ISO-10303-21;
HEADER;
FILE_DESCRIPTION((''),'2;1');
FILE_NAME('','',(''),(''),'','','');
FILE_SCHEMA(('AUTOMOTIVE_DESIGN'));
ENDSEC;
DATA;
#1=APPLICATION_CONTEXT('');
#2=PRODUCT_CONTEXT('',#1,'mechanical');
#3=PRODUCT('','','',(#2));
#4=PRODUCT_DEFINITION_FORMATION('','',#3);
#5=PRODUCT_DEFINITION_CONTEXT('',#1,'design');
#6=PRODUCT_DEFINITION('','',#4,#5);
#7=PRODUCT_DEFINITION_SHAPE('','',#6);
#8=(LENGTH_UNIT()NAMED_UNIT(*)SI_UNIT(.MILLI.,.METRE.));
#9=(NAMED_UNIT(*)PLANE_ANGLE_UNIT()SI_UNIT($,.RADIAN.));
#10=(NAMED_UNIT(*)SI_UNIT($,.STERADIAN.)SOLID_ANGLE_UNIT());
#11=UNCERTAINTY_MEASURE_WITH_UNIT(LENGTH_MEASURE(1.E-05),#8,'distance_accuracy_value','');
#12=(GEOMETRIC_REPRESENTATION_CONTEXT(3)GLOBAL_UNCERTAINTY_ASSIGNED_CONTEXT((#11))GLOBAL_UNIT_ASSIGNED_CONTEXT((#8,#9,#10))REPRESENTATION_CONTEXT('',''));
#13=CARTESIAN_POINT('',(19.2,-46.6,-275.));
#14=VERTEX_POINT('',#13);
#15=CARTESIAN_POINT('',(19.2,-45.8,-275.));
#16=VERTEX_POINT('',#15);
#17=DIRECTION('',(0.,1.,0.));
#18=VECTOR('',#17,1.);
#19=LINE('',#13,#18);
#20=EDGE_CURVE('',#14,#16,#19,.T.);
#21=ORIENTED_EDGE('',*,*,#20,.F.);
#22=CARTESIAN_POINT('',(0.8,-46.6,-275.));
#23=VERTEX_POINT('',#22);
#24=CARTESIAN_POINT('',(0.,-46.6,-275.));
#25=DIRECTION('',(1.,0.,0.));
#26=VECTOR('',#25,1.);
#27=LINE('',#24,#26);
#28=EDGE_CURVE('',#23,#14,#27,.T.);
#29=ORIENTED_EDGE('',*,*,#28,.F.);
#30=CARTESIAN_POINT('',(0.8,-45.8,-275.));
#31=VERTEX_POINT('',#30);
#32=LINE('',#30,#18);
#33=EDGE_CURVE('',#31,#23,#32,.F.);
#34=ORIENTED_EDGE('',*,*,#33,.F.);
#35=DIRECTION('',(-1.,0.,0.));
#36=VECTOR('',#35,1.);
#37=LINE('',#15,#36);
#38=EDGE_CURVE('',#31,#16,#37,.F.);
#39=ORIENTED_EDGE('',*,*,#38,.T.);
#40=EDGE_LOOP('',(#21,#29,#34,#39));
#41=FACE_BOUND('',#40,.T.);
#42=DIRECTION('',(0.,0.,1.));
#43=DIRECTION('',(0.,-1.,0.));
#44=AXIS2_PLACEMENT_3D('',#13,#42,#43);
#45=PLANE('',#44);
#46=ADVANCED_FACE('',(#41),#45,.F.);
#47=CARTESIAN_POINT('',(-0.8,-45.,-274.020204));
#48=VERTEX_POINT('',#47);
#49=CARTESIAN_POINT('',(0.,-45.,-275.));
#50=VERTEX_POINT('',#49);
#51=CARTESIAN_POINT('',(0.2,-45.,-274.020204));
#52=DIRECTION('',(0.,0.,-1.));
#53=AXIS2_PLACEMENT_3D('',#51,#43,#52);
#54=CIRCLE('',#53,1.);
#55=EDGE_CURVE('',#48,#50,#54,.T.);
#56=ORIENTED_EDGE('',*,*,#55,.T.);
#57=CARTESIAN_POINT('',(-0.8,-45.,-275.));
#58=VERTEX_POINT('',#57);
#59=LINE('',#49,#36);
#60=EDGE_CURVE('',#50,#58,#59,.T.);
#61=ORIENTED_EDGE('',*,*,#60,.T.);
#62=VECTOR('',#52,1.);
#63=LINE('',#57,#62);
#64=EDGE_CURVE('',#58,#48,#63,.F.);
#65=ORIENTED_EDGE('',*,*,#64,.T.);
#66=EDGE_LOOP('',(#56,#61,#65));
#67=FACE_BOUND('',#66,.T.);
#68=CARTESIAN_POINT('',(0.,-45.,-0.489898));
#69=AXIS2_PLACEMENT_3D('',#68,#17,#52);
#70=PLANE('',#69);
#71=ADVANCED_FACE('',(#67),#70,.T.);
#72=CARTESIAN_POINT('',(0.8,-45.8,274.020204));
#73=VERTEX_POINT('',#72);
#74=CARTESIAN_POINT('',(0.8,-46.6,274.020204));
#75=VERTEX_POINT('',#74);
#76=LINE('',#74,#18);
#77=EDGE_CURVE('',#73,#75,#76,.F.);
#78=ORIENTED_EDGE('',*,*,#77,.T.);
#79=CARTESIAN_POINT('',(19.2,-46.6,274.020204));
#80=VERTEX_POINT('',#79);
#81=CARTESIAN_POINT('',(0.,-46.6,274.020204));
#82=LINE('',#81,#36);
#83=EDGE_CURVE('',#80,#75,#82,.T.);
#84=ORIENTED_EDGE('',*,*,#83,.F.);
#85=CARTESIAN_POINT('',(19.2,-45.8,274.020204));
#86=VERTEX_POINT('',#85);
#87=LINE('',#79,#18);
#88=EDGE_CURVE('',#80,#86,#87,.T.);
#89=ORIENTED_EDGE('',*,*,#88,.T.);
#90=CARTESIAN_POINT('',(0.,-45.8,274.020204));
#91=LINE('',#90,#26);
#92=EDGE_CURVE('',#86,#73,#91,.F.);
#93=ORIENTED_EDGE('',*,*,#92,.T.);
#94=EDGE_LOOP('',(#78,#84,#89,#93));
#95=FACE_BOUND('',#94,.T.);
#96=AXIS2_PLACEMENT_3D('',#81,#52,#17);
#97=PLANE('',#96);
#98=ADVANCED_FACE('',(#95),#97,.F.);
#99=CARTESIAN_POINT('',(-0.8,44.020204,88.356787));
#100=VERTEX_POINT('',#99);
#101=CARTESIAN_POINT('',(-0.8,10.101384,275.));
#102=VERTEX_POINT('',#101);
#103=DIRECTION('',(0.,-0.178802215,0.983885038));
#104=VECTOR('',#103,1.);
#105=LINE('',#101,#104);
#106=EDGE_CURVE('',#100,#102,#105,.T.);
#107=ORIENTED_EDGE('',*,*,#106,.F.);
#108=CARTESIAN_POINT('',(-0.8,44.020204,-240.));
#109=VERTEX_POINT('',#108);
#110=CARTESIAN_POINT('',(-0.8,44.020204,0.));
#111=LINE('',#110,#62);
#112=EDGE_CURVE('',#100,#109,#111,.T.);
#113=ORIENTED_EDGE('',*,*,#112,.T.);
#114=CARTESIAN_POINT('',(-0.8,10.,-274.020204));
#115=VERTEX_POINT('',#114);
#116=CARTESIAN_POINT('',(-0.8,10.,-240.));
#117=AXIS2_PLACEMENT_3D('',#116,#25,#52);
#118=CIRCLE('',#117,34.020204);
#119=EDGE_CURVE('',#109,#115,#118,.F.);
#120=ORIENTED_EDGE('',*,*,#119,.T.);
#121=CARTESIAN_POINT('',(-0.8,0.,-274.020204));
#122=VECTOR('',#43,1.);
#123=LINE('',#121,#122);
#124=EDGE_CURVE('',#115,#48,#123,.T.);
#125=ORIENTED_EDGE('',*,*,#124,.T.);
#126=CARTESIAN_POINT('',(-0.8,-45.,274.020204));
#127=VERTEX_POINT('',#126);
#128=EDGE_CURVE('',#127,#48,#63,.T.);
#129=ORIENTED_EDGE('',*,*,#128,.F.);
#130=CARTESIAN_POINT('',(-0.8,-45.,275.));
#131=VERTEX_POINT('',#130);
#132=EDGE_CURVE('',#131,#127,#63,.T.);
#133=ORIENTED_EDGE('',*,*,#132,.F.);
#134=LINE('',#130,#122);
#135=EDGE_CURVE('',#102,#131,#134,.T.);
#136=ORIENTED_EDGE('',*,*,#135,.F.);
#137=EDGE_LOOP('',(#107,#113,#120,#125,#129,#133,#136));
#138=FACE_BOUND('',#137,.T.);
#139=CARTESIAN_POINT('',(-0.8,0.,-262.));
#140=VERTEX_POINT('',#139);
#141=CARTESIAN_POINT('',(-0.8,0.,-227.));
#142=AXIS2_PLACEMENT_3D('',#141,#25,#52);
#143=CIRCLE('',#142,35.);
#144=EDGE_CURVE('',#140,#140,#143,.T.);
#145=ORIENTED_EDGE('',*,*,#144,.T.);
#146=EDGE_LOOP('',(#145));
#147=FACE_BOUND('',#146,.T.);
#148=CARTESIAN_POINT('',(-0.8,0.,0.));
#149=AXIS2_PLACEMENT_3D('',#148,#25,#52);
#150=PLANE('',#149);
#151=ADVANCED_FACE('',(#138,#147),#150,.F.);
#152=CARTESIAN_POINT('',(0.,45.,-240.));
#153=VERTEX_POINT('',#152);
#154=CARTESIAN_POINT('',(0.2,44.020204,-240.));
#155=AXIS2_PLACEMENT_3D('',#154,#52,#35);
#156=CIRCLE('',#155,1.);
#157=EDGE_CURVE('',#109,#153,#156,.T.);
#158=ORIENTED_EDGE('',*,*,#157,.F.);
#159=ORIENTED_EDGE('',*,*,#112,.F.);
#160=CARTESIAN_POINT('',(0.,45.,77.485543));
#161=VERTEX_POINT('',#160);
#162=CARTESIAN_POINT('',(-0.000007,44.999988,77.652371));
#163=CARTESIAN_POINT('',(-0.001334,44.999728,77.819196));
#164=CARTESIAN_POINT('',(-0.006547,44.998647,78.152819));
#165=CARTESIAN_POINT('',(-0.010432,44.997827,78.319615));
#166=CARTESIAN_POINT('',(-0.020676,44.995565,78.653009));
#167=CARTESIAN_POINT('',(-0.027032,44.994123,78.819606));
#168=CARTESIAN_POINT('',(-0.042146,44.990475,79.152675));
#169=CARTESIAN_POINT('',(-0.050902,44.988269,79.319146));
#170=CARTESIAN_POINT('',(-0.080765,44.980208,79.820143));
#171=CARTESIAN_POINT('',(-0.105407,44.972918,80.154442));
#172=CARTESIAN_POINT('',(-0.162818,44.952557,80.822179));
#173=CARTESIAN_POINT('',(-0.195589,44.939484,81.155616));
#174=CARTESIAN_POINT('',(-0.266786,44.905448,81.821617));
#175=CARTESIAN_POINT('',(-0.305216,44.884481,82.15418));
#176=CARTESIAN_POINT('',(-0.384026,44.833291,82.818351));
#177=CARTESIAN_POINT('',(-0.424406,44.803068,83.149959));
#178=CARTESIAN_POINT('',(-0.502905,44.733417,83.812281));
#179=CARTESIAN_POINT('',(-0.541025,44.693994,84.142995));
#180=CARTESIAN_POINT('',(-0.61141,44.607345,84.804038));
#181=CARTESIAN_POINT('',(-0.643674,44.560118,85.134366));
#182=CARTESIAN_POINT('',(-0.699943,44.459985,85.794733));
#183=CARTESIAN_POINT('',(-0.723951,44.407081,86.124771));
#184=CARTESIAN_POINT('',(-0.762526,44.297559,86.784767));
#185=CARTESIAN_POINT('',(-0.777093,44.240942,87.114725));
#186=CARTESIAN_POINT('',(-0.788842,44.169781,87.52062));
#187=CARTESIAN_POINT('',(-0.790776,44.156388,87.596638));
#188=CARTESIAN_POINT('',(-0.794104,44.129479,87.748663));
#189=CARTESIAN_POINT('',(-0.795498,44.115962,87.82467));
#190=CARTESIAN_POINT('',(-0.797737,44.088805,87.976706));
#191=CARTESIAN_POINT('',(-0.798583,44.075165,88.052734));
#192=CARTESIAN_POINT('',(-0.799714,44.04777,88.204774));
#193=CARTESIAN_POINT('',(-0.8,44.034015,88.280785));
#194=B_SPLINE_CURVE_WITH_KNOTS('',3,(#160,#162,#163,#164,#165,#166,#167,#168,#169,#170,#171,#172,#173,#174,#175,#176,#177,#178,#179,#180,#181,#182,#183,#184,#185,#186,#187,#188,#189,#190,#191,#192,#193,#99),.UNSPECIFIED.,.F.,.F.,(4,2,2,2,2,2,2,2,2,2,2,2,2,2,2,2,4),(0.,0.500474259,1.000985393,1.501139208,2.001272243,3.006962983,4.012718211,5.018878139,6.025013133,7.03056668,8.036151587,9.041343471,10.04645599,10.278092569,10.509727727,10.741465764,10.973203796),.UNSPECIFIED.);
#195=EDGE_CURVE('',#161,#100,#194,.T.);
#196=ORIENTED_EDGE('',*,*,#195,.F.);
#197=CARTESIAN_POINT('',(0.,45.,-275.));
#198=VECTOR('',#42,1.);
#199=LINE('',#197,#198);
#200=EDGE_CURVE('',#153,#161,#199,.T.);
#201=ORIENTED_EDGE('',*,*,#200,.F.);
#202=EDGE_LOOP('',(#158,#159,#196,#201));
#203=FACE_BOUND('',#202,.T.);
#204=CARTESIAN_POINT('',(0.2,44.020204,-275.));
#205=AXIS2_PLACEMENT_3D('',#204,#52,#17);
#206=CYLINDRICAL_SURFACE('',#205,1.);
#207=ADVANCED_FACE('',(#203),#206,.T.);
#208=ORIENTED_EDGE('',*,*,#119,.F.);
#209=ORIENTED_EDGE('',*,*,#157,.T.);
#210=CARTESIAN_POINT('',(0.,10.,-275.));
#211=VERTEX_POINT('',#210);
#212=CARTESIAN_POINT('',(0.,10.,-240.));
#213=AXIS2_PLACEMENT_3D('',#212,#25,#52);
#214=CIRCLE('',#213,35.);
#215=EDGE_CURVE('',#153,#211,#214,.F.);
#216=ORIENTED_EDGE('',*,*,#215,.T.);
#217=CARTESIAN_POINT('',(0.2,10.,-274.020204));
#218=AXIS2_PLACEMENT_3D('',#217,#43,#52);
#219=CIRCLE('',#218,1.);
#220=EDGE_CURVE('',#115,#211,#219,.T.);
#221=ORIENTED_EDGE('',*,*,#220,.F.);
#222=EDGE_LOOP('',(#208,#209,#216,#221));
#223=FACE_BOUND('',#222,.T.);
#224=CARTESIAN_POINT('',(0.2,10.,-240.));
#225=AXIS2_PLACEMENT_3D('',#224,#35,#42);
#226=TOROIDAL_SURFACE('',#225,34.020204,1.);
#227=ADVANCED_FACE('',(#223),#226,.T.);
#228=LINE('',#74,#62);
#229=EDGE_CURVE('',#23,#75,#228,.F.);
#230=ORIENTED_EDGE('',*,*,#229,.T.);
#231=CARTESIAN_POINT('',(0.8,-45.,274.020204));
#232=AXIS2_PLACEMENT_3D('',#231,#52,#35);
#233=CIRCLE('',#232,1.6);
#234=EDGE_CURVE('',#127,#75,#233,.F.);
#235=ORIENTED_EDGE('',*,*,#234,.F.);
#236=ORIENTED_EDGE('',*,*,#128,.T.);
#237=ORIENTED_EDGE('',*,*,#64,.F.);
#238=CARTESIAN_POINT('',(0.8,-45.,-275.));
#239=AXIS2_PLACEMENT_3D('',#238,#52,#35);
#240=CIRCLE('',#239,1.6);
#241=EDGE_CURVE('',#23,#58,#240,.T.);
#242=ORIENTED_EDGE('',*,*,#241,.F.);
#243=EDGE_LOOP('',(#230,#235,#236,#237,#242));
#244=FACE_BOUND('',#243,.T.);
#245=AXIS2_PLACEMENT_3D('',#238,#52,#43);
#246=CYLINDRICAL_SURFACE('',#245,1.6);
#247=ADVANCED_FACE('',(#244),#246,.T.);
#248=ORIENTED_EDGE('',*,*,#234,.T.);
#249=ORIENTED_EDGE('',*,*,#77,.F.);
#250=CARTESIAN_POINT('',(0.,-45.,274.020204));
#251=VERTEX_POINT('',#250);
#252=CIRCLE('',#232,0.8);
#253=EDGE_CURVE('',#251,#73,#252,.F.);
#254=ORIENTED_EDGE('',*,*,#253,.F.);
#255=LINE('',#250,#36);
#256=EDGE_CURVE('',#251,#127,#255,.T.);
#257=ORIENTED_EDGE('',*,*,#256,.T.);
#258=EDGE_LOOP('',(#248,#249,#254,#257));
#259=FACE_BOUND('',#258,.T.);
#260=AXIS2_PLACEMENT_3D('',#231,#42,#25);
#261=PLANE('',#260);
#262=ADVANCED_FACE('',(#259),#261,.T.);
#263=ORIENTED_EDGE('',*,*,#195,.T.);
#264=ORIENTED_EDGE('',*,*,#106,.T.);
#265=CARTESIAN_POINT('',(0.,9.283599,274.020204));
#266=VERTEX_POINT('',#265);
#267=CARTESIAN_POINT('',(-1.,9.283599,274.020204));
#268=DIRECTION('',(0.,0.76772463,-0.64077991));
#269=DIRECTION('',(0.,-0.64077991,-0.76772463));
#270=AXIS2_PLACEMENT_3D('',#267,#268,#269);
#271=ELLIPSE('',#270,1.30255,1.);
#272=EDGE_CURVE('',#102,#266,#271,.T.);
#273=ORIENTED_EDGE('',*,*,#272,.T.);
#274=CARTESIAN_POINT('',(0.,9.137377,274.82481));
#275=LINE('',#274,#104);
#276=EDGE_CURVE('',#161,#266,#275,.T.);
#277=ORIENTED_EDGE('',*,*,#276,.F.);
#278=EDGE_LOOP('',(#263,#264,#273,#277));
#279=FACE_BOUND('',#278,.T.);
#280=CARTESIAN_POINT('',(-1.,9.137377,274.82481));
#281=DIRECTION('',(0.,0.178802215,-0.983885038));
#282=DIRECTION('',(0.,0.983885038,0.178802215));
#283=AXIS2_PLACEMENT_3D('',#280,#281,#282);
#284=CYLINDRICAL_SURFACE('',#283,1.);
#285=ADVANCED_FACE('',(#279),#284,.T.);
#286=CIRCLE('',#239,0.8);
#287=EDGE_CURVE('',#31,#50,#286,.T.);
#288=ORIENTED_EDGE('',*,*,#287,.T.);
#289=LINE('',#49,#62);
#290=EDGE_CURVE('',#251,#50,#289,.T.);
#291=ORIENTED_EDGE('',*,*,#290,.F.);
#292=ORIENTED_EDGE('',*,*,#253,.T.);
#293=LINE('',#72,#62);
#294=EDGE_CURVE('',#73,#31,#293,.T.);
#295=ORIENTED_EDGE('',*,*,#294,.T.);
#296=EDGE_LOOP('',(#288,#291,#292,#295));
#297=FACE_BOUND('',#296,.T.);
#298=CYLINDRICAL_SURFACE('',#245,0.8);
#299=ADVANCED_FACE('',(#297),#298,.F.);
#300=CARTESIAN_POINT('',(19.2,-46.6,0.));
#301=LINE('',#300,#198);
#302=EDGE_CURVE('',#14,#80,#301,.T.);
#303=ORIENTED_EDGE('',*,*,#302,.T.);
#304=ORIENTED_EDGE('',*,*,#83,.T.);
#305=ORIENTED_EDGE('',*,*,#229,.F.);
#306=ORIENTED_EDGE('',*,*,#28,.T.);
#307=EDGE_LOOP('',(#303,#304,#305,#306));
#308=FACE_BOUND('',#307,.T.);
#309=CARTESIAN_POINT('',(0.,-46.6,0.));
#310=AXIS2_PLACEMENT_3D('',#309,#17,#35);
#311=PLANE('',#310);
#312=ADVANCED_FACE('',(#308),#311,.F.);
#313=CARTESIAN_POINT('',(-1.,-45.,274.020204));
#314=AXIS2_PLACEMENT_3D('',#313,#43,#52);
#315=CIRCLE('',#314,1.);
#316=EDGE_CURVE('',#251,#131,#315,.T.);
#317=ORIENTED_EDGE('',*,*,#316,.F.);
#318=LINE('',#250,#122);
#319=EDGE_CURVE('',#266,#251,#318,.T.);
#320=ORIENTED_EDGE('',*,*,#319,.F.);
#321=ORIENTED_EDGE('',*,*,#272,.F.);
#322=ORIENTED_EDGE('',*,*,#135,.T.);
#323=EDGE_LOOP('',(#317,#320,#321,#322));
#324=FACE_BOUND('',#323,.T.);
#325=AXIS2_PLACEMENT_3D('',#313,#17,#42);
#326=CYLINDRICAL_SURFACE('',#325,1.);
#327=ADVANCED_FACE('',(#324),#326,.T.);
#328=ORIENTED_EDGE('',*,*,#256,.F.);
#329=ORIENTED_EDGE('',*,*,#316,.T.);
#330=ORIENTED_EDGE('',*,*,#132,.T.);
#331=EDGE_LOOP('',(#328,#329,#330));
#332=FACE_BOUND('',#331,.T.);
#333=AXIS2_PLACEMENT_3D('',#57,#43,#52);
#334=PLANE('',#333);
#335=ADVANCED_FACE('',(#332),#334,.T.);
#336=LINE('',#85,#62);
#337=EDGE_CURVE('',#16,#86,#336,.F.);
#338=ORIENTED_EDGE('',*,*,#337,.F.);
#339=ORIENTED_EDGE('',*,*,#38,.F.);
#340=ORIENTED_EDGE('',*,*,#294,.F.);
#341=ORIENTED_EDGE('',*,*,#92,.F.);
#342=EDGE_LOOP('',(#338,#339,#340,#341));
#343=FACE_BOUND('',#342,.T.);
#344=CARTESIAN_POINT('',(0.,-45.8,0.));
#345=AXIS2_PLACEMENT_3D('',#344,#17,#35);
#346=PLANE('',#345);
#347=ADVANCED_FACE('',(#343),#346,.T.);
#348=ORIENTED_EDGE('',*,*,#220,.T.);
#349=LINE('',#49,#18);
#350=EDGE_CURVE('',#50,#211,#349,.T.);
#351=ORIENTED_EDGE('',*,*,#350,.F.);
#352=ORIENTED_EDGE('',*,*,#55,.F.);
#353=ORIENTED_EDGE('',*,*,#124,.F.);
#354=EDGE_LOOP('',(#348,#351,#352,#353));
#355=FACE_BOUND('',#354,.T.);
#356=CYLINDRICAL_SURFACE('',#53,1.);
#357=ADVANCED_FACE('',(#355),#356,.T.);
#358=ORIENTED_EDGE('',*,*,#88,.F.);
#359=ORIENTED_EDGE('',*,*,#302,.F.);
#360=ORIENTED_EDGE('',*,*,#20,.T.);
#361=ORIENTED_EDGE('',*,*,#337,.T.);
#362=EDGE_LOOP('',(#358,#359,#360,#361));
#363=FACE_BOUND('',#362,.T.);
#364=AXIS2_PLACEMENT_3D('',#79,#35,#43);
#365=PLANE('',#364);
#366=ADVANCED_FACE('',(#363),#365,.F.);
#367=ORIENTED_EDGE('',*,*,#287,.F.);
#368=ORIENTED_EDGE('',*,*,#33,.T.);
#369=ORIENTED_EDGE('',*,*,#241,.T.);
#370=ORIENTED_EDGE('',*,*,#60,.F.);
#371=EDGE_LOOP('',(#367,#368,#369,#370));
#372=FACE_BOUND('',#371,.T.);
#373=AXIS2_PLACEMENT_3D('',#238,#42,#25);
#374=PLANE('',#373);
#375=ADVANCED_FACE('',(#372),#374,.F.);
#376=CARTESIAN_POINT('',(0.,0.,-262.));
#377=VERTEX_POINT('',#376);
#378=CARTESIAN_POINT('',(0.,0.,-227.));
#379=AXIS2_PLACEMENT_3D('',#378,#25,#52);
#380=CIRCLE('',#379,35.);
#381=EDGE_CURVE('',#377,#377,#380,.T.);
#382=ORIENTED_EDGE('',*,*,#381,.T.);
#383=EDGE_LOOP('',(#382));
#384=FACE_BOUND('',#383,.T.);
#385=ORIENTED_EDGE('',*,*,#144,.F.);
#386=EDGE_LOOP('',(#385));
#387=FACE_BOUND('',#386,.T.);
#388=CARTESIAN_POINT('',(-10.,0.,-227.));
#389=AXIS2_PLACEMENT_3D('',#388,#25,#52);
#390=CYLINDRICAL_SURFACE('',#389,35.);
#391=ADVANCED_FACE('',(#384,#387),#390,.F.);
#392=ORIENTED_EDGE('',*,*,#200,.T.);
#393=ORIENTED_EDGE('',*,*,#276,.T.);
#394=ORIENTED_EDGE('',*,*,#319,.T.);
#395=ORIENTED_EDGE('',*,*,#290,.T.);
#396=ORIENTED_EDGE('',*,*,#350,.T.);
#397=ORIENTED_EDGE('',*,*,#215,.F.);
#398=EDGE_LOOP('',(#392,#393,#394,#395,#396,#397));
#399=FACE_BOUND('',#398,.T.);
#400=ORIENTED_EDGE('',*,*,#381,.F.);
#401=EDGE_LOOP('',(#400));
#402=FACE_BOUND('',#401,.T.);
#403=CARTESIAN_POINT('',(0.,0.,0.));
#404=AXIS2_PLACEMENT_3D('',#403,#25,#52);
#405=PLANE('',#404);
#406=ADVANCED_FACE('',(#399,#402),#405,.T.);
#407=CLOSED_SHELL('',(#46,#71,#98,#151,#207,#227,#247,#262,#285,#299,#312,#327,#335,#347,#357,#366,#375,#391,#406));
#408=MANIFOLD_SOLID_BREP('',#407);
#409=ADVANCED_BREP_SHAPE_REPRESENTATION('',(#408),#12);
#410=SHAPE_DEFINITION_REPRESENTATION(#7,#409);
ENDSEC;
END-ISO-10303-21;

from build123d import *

# Parameters (mm, degrees)
BASE_FLANGE1_DEPTH = 0.8
SKETCH6_R          = 35.00000000000004
CUT_EXTRUDE1_DEPTH = 10
CUT_EXTRUDE2_DEPTH = 10
FILLET1_R          = 1
FILLET2_R          = 1
FILLET5_R          = 1
EDGE_FLANGE1_DEPTH = 549.0202041028867


# Sheet-metal steps are written as plain solids
with BuildPart() as part:
    # Base-Flange1: sheet metal written as solids
    # Sketch1 → Base-Flange1 (new body)
    with BuildSketch(Plane(origin=(0, 0, 0), x_dir=(0, 0, -1), z_dir=(1, 0, 0))):
        Polygon((-275.00000000000006, 10.101383653592132), (-82.96531829613122, 44.999999999999964), (274.99999999999994, 45.00000000000006), (274.99999999999994, -44.99999999999994), (-275.00000000000006, -45), align=None)
    extrude(amount=-BASE_FLANGE1_DEPTH)

    # Sketch6 → Cut-Extrude1 (cut)
    with BuildSketch(Plane(origin=(0, 0, 0), x_dir=(0, 0, -1), z_dir=(1, 0, 0))):
        with Locations((226.99999999999997, 0)):
            Circle(SKETCH6_R)
    extrude(amount=-CUT_EXTRUDE1_DEPTH, mode=Mode.SUBTRACT)

    # Sketch7 → Cut-Extrude2 (cut)
    with BuildSketch(Plane(origin=(0, 0, 0), x_dir=(0, 0, -1), z_dir=(1, 0, 0))):
        with BuildLine():
            Line((274.99999999999994, 45.00000000000006), (239.99999999999997, 45.00000000000006))
            ThreePointArc((239.99999999999997, 45.00000000000006), (264.74873734152914, 34.74873734152919), (274.99999999999994, 10.00000000000005))
            Line((274.99999999999994, 10.00000000000005), (274.99999999999994, 45.00000000000006))
        make_face()
    extrude(amount=-CUT_EXTRUDE2_DEPTH, mode=Mode.SUBTRACT)

    # Fillet1
    # the kernel refuses this fillet: 1 mm, written as the material it takes off along each edge
    with BuildSketch(Plane(origin=(0, 9.663409461677158, 277.4100163084993), x_dir=(-1.0, -1.5331256382814002e-12, -2.7861614884612947e-13), z_dir=(0, 0.1788022151163431, -0.9838850379335429))) as fillet1_piece_1:
        with BuildLine():
            CenterArc((1.0000000000015268, -0.979795897113006), FILLET1_R, 101.53695903288988, 78.46304096719939)
            Line((1.52675e-12, -0.9797958971145642), (-0.01999999999847325, -0.9797958971145954))
            Line((-0.01999999999847325, -0.9797958971145954), (-0.02, -3.816e-14))
            Line((-0.02, -3.816e-14), (-3.116e-14, 0.01999999999999651))
            ThreePointArc((-3.116e-14, 0.01999999999999651), (0.4000000000000967, 0.0200000000006233), (0.7960000000002303, 0.01959591794225489))
            Line((0.7960000000002303, 0.01959591794225489), (0.8000000000002557, 0))
        make_face()
    extrude(amount=204.97795897114563, mode=Mode.SUBTRACT)

    # Fillet2
    # the kernel refuses this fillet: 1 mm, written as the material it takes off along each edge
    with BuildSketch(Plane(origin=(-0.8, 10.00000000000005, -274.99999999999994), x_dir=(0, 0, 1), z_dir=(0, -1, 0))) as fillet2_piece_1:
        with BuildLine():
            CenterArc((0.9797958971145704, -1), FILLET2_R, 90, 78.46304096719936)
            Line((1.25056e-12, -0.8000000000002546), (-0.01959591794098969, -0.7960000000002597))
            ThreePointArc((-0.01959591794098969, -0.7960000000002597), (-0.01999999999998181, -0.4000000000001273), (-0.01999999999998181, 0))
            Line((-0.01999999999998181, 0), (0, 0.02000000000000002))
            Line((0, 0.02000000000000002), (0.9797958971145704, 0.02000000000000002))
            Line((0.9797958971145704, 0.02000000000000002), (0.9797958971145704, 0))
        make_face()
    extrude(amount=57.44948974278642, mode=Mode.SUBTRACT)
    with BuildSketch(Plane(origin=(-0.8, 10.000000000000078, -239.99999999999997), x_dir=(0, -1.07e-15, -1), z_dir=(0, -1, 1.07e-15))) as fillet2_piece_2:
        with BuildLine():
            CenterArc((34.0202041028854, 1), FILLET2_R, 270, 78.46304096719928)
            Line((34.99999999999872, 0.800000000000253), (35.01959591794102, 0.7960000000002581))
            ThreePointArc((35.01959591794102, 0.7960000000002581), (35.01999999999995, 0.4000000000001265), (35.01999999999995, 0))
            Line((35.01999999999995, 0), (34.999999999999915, -0.02000000000000002))
            Line((34.999999999999915, -0.02000000000000002), (34.0202041028854, -0.02000000000000002))
            Line((34.0202041028854, -0.02000000000000002), (34.0202041028854, 0))
        make_face()
    revolve(axis=Axis((-0.8, 10.000000000000078, -239.99999999999997), (1, 0, 0)), revolution_arc=90.00000000000006, mode=Mode.SUBTRACT)
    with BuildSketch(Plane(origin=(-0.8, 44.999999999999964, 90.3137875244906), x_dir=(0, -1, -2.6e-16), z_dir=(0, 2.6e-16, -1))) as fillet2_piece_3:
        with BuildLine():
            CenterArc((0.9797958971145846, -1), FILLET2_R, 90, 78.46304096719959)
            Line((1.25766e-12, -0.8000000000002574), (-0.01959591794101101, -0.7960000000002625))
            ThreePointArc((-0.01959591794101101, -0.7960000000002625), (-0.02000000000000313, -0.4000000000001287), (-0.02000000000000313, 0))
            Line((-0.02000000000000313, 0), (0, 0.02000000000000002))
            Line((0, 0.02000000000000002), (0.9797958971145846, 0.02000000000000002))
            Line((0.9797958971145846, 0.02000000000000002), (0.9797958971145846, 0))
        make_face()
    extrude(amount=330.3137875244905, mode=Mode.SUBTRACT)

    # Fillet5
    # the kernel refuses this fillet: 1 mm, written as the material it takes off along each edge
    with BuildSketch(Plane(origin=(0, -47.449489742786426, 275.00000000000006), x_dir=(-1.0, 0, -1.5631940186717228e-12), z_dir=(0, 1, 0))) as fillet5_piece_1:
        with BuildLine():
            CenterArc((1.0000000000015317, -0.9797958971130072), FILLET5_R, 101.53695903289021, 78.46304096719933)
            Line((1.53161e-12, -0.9797958971145704), (0, 0))
            Line((0, 0), (0.8000000000002546, 0))
        make_face()
    extrude(amount=59.00451925564195, mode=Mode.SUBTRACT)

    # Edge-Flange1: sheet metal written as solids
    # Edge-Flange1 section (on a plane across the edge) → Edge-Flange1 (add)
    with BuildSketch(Plane(origin=(-5.59e-15, -45.800000000000004, 274.0202041028868), x_dir=(3.49e-15, 1, 1e-16), z_dir=(0, 1e-16, -1))):
        with BuildLine():
            Line((-0.8, 0.8000000000000028), (-0.8, 19.200000000000003))
            Line((-0.8, 19.200000000000003), (0, 19.200000000000003))
            Line((0, 19.200000000000003), (0, 0.8000000000000028))
            ThreePointArc((0, 0.8000000000000028), (0.23431457505076303, 0.2343145750507638), (0.8000000000000028, 2.78e-15))
            Line((0.8000000000000028, 2.78e-15), (0.8000000000000056, -0.7999999999999973))
            ThreePointArc((0.8000000000000056, -0.7999999999999973), (-0.331370849898474, -0.3313708498984752), (-0.8, 0.8000000000000028))
        make_face()
    extrude(amount=EDGE_FLANGE1_DEPTH)


solid = part.part
